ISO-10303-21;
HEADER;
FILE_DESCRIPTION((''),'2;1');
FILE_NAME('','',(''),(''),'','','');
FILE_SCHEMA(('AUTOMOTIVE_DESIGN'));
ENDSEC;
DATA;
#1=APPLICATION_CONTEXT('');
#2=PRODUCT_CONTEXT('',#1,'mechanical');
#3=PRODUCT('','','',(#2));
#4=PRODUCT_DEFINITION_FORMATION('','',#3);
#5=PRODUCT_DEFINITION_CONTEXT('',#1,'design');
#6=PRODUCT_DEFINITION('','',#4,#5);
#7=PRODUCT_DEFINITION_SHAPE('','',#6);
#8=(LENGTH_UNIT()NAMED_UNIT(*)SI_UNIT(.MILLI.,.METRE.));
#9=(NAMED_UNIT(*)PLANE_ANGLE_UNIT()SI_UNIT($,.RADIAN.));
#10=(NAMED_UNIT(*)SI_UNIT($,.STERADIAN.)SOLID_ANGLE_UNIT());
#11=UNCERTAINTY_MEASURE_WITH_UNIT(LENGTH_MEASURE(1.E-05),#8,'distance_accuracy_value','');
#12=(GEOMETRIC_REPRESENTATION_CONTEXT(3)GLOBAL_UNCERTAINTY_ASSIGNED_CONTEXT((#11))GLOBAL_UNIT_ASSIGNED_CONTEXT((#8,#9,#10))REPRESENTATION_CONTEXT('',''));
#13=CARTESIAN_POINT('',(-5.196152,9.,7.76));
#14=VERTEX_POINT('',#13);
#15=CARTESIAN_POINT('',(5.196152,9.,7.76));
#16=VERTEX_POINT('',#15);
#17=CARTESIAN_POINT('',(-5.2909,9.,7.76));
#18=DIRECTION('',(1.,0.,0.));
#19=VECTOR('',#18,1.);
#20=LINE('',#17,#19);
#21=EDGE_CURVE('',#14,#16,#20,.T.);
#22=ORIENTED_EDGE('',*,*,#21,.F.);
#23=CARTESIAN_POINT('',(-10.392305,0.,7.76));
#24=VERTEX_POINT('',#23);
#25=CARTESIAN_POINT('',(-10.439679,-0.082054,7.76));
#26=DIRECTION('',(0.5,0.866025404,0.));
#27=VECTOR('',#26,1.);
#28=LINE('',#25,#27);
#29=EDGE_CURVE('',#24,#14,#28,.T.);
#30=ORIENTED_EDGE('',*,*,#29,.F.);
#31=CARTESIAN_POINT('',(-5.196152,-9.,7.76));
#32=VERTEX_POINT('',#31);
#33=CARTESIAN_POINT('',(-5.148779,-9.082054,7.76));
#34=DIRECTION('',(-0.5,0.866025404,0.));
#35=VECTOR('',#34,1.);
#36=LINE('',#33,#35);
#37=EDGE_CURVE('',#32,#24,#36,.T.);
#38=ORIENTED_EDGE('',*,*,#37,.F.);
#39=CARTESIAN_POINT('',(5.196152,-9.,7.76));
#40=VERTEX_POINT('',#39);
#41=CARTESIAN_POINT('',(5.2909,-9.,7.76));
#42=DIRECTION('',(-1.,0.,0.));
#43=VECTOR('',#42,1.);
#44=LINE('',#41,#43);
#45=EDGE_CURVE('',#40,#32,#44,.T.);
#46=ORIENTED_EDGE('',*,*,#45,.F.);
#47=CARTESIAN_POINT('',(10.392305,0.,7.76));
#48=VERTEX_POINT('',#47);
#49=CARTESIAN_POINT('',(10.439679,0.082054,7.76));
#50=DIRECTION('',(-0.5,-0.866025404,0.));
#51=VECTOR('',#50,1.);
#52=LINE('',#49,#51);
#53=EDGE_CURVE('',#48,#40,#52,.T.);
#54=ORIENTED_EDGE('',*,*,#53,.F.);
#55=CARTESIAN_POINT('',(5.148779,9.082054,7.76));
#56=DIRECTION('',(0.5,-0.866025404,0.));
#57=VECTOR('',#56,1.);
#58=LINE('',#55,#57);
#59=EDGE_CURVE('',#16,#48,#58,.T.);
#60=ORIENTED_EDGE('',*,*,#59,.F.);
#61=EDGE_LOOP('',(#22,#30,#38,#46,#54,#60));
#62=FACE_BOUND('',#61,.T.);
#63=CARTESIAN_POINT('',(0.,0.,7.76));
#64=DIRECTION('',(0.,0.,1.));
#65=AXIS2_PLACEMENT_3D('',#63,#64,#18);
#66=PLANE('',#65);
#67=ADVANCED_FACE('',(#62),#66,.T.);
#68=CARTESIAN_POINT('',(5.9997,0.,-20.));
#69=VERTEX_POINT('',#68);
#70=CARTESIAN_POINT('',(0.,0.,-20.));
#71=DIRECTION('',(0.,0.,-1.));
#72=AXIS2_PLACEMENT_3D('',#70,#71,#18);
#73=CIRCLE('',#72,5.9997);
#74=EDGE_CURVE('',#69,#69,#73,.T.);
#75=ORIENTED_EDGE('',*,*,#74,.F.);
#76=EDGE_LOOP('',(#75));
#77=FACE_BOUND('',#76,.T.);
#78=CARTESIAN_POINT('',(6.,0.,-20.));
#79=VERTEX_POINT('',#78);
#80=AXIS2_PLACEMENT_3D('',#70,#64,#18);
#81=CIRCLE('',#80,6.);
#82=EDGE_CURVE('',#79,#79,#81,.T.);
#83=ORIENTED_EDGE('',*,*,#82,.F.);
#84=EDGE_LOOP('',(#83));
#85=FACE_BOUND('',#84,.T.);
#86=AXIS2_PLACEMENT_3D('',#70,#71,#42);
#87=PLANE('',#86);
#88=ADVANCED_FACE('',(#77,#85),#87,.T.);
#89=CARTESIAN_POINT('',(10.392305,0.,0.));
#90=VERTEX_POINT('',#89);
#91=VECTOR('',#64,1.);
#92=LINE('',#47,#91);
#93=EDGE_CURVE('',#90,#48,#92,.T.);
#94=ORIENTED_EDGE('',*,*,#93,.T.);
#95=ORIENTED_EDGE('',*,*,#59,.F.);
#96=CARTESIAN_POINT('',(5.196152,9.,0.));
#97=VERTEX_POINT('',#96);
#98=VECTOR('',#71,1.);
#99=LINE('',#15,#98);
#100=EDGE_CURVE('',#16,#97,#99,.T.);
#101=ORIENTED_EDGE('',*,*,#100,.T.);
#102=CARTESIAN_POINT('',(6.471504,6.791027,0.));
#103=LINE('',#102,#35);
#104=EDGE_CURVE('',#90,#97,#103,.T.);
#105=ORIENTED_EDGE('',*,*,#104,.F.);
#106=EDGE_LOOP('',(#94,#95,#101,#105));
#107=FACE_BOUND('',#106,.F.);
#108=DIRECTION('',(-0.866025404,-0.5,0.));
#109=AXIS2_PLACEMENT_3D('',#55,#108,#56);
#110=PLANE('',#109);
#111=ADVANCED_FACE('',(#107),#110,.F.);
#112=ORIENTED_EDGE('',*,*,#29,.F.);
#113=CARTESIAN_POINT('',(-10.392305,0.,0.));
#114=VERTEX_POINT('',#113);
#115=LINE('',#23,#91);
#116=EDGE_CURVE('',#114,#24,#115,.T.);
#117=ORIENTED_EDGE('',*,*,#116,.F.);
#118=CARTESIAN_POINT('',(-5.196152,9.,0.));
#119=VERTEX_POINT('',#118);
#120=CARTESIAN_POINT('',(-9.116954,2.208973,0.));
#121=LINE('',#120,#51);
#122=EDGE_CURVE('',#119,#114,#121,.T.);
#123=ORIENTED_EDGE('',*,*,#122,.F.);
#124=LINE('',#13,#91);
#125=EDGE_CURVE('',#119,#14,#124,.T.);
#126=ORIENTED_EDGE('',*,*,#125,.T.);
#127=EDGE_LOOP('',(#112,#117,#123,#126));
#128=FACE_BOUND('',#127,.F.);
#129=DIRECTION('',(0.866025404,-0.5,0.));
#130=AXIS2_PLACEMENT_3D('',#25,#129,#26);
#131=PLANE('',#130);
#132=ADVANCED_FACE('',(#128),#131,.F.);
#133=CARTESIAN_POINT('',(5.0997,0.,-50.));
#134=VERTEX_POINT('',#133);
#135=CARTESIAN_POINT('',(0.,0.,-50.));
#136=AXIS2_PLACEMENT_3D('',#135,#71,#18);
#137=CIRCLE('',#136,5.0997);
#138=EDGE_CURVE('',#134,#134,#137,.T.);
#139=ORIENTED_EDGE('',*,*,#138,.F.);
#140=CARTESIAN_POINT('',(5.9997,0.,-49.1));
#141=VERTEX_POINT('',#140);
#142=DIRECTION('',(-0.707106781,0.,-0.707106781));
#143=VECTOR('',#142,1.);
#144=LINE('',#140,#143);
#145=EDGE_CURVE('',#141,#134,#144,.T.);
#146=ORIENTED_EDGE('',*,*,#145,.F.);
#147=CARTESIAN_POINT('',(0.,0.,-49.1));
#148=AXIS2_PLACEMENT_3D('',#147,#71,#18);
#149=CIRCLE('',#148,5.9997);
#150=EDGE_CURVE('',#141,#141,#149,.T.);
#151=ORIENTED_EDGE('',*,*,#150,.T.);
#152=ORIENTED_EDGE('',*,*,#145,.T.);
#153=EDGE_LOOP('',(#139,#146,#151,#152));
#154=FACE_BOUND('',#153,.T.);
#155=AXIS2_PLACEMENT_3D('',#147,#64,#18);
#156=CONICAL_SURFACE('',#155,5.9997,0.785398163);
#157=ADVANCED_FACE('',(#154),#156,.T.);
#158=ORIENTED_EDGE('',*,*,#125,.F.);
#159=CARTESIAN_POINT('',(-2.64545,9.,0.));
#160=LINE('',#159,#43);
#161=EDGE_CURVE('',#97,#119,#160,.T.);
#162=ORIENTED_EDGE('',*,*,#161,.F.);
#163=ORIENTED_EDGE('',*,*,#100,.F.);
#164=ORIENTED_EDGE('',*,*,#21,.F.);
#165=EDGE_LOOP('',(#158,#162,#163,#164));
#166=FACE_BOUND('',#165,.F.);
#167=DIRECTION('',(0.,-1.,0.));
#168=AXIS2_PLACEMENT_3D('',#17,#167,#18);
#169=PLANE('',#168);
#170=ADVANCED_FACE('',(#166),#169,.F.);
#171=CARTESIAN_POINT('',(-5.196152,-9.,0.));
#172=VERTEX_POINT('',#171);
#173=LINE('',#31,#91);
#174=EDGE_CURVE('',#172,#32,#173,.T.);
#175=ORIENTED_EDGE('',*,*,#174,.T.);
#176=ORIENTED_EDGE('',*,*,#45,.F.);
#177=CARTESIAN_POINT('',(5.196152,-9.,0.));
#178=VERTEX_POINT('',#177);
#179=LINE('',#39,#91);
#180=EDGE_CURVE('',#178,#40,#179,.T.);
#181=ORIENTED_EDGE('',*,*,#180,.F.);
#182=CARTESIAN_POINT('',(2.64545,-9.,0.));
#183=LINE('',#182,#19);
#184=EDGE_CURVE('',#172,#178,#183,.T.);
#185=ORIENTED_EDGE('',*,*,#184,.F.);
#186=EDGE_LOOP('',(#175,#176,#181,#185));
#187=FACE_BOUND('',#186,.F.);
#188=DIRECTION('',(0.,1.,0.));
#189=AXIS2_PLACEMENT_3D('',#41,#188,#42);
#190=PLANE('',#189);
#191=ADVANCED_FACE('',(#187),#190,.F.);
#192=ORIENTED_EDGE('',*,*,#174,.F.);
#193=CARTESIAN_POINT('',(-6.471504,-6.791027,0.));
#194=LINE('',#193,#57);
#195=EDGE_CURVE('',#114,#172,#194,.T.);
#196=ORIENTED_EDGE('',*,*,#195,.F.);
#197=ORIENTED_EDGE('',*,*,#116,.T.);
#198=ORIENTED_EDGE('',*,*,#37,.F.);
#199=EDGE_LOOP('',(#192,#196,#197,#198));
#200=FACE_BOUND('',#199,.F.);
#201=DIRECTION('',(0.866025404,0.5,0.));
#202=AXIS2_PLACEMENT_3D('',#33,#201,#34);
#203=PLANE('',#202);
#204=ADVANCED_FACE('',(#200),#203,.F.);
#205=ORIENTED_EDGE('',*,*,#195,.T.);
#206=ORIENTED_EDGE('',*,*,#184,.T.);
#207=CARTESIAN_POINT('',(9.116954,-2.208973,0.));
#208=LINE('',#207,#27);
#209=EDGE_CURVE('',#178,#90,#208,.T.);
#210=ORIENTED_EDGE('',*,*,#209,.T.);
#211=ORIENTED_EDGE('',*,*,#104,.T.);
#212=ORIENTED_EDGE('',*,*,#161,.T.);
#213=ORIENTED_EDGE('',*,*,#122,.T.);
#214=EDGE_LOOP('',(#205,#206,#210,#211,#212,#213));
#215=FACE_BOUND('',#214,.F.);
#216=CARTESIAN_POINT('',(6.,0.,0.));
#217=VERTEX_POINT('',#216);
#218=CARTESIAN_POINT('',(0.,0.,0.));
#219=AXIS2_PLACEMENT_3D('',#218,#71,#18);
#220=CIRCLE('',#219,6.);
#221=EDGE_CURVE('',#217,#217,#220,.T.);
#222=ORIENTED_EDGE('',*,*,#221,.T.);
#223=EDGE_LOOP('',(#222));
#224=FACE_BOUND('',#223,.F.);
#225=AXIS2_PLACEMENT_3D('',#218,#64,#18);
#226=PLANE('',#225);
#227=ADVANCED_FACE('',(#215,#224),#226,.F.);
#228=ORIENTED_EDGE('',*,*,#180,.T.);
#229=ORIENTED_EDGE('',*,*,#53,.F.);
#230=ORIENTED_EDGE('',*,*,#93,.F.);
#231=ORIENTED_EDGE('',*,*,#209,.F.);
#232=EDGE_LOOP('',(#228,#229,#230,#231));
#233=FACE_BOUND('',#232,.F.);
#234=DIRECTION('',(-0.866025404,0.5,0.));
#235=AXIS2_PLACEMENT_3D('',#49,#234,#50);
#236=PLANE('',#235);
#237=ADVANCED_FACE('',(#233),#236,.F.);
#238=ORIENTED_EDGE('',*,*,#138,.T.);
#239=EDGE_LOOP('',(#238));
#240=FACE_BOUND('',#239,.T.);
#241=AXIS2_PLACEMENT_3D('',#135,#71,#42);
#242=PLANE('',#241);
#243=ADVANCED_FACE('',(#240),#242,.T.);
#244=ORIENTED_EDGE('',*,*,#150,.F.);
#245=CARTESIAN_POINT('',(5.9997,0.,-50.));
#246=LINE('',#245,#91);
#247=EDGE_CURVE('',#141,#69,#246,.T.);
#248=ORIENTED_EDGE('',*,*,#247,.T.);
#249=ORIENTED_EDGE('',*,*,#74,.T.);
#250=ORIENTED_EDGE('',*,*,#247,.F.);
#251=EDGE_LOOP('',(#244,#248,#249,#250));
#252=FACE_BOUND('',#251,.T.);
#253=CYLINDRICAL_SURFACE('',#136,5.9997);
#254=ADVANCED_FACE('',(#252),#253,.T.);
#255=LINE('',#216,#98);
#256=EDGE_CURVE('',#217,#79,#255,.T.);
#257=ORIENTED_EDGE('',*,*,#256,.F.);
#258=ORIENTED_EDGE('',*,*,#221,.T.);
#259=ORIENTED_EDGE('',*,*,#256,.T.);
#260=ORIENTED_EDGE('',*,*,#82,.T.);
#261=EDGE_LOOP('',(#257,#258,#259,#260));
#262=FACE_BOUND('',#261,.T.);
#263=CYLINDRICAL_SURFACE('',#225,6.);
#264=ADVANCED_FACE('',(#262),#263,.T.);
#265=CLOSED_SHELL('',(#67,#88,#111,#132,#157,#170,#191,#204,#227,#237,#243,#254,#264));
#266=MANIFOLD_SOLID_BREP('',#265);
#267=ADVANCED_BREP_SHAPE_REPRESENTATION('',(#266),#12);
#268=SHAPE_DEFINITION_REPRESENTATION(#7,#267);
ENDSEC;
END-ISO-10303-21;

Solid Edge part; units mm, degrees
sketch "Sketch1" plane through (0, 0, 0) normal (0, 0, 1) x (1, 0, 0)
  circle A0 centre (0, 0) radius 10.44
  dimension "D1" = 20.88
extrude "Protrusion1" add sketch "Sketch1" along normal blind 7.76
sketch "Sketch2" plane through (0, 0, 0) normal (0, 0, -1) x (1, 0, 0)
  circle A0 centre (0, 0) radius 6
extrude "Protrusion2" add sketch "Sketch2" along normal blind 50
sketch "Sketch3" plane through (0, 0, -50) normal (0, 0, -1) x (1, 0, 0)
  circle A0 centre (0, 0) radius 5.9997
extrude "Cutout1" cut sketch "Sketch3" against normal blind 30 flip side to cut
chamfer "Chamfer_1" distance 0.9 angle 45 1 edges at (-5.9997, 0, -50)
sketch "Sketch4" plane through (0, 0, 7.76) normal (0, 0, 1) x (1, 0, 0)
  line L0 (-5.2909, 9) -> (5.2909, 9)
  dimension "D1" = 18
extrude "Cutout2" cut sketch "Sketch4" against normal up to next material side at (0, 9.05, 7.76)
pattern_circular "Pattern1" count 6 over 360 about axis through (0, 0, 7.76) along (0, 0, 1) of "Cutout2"
properties part number "24101318"
